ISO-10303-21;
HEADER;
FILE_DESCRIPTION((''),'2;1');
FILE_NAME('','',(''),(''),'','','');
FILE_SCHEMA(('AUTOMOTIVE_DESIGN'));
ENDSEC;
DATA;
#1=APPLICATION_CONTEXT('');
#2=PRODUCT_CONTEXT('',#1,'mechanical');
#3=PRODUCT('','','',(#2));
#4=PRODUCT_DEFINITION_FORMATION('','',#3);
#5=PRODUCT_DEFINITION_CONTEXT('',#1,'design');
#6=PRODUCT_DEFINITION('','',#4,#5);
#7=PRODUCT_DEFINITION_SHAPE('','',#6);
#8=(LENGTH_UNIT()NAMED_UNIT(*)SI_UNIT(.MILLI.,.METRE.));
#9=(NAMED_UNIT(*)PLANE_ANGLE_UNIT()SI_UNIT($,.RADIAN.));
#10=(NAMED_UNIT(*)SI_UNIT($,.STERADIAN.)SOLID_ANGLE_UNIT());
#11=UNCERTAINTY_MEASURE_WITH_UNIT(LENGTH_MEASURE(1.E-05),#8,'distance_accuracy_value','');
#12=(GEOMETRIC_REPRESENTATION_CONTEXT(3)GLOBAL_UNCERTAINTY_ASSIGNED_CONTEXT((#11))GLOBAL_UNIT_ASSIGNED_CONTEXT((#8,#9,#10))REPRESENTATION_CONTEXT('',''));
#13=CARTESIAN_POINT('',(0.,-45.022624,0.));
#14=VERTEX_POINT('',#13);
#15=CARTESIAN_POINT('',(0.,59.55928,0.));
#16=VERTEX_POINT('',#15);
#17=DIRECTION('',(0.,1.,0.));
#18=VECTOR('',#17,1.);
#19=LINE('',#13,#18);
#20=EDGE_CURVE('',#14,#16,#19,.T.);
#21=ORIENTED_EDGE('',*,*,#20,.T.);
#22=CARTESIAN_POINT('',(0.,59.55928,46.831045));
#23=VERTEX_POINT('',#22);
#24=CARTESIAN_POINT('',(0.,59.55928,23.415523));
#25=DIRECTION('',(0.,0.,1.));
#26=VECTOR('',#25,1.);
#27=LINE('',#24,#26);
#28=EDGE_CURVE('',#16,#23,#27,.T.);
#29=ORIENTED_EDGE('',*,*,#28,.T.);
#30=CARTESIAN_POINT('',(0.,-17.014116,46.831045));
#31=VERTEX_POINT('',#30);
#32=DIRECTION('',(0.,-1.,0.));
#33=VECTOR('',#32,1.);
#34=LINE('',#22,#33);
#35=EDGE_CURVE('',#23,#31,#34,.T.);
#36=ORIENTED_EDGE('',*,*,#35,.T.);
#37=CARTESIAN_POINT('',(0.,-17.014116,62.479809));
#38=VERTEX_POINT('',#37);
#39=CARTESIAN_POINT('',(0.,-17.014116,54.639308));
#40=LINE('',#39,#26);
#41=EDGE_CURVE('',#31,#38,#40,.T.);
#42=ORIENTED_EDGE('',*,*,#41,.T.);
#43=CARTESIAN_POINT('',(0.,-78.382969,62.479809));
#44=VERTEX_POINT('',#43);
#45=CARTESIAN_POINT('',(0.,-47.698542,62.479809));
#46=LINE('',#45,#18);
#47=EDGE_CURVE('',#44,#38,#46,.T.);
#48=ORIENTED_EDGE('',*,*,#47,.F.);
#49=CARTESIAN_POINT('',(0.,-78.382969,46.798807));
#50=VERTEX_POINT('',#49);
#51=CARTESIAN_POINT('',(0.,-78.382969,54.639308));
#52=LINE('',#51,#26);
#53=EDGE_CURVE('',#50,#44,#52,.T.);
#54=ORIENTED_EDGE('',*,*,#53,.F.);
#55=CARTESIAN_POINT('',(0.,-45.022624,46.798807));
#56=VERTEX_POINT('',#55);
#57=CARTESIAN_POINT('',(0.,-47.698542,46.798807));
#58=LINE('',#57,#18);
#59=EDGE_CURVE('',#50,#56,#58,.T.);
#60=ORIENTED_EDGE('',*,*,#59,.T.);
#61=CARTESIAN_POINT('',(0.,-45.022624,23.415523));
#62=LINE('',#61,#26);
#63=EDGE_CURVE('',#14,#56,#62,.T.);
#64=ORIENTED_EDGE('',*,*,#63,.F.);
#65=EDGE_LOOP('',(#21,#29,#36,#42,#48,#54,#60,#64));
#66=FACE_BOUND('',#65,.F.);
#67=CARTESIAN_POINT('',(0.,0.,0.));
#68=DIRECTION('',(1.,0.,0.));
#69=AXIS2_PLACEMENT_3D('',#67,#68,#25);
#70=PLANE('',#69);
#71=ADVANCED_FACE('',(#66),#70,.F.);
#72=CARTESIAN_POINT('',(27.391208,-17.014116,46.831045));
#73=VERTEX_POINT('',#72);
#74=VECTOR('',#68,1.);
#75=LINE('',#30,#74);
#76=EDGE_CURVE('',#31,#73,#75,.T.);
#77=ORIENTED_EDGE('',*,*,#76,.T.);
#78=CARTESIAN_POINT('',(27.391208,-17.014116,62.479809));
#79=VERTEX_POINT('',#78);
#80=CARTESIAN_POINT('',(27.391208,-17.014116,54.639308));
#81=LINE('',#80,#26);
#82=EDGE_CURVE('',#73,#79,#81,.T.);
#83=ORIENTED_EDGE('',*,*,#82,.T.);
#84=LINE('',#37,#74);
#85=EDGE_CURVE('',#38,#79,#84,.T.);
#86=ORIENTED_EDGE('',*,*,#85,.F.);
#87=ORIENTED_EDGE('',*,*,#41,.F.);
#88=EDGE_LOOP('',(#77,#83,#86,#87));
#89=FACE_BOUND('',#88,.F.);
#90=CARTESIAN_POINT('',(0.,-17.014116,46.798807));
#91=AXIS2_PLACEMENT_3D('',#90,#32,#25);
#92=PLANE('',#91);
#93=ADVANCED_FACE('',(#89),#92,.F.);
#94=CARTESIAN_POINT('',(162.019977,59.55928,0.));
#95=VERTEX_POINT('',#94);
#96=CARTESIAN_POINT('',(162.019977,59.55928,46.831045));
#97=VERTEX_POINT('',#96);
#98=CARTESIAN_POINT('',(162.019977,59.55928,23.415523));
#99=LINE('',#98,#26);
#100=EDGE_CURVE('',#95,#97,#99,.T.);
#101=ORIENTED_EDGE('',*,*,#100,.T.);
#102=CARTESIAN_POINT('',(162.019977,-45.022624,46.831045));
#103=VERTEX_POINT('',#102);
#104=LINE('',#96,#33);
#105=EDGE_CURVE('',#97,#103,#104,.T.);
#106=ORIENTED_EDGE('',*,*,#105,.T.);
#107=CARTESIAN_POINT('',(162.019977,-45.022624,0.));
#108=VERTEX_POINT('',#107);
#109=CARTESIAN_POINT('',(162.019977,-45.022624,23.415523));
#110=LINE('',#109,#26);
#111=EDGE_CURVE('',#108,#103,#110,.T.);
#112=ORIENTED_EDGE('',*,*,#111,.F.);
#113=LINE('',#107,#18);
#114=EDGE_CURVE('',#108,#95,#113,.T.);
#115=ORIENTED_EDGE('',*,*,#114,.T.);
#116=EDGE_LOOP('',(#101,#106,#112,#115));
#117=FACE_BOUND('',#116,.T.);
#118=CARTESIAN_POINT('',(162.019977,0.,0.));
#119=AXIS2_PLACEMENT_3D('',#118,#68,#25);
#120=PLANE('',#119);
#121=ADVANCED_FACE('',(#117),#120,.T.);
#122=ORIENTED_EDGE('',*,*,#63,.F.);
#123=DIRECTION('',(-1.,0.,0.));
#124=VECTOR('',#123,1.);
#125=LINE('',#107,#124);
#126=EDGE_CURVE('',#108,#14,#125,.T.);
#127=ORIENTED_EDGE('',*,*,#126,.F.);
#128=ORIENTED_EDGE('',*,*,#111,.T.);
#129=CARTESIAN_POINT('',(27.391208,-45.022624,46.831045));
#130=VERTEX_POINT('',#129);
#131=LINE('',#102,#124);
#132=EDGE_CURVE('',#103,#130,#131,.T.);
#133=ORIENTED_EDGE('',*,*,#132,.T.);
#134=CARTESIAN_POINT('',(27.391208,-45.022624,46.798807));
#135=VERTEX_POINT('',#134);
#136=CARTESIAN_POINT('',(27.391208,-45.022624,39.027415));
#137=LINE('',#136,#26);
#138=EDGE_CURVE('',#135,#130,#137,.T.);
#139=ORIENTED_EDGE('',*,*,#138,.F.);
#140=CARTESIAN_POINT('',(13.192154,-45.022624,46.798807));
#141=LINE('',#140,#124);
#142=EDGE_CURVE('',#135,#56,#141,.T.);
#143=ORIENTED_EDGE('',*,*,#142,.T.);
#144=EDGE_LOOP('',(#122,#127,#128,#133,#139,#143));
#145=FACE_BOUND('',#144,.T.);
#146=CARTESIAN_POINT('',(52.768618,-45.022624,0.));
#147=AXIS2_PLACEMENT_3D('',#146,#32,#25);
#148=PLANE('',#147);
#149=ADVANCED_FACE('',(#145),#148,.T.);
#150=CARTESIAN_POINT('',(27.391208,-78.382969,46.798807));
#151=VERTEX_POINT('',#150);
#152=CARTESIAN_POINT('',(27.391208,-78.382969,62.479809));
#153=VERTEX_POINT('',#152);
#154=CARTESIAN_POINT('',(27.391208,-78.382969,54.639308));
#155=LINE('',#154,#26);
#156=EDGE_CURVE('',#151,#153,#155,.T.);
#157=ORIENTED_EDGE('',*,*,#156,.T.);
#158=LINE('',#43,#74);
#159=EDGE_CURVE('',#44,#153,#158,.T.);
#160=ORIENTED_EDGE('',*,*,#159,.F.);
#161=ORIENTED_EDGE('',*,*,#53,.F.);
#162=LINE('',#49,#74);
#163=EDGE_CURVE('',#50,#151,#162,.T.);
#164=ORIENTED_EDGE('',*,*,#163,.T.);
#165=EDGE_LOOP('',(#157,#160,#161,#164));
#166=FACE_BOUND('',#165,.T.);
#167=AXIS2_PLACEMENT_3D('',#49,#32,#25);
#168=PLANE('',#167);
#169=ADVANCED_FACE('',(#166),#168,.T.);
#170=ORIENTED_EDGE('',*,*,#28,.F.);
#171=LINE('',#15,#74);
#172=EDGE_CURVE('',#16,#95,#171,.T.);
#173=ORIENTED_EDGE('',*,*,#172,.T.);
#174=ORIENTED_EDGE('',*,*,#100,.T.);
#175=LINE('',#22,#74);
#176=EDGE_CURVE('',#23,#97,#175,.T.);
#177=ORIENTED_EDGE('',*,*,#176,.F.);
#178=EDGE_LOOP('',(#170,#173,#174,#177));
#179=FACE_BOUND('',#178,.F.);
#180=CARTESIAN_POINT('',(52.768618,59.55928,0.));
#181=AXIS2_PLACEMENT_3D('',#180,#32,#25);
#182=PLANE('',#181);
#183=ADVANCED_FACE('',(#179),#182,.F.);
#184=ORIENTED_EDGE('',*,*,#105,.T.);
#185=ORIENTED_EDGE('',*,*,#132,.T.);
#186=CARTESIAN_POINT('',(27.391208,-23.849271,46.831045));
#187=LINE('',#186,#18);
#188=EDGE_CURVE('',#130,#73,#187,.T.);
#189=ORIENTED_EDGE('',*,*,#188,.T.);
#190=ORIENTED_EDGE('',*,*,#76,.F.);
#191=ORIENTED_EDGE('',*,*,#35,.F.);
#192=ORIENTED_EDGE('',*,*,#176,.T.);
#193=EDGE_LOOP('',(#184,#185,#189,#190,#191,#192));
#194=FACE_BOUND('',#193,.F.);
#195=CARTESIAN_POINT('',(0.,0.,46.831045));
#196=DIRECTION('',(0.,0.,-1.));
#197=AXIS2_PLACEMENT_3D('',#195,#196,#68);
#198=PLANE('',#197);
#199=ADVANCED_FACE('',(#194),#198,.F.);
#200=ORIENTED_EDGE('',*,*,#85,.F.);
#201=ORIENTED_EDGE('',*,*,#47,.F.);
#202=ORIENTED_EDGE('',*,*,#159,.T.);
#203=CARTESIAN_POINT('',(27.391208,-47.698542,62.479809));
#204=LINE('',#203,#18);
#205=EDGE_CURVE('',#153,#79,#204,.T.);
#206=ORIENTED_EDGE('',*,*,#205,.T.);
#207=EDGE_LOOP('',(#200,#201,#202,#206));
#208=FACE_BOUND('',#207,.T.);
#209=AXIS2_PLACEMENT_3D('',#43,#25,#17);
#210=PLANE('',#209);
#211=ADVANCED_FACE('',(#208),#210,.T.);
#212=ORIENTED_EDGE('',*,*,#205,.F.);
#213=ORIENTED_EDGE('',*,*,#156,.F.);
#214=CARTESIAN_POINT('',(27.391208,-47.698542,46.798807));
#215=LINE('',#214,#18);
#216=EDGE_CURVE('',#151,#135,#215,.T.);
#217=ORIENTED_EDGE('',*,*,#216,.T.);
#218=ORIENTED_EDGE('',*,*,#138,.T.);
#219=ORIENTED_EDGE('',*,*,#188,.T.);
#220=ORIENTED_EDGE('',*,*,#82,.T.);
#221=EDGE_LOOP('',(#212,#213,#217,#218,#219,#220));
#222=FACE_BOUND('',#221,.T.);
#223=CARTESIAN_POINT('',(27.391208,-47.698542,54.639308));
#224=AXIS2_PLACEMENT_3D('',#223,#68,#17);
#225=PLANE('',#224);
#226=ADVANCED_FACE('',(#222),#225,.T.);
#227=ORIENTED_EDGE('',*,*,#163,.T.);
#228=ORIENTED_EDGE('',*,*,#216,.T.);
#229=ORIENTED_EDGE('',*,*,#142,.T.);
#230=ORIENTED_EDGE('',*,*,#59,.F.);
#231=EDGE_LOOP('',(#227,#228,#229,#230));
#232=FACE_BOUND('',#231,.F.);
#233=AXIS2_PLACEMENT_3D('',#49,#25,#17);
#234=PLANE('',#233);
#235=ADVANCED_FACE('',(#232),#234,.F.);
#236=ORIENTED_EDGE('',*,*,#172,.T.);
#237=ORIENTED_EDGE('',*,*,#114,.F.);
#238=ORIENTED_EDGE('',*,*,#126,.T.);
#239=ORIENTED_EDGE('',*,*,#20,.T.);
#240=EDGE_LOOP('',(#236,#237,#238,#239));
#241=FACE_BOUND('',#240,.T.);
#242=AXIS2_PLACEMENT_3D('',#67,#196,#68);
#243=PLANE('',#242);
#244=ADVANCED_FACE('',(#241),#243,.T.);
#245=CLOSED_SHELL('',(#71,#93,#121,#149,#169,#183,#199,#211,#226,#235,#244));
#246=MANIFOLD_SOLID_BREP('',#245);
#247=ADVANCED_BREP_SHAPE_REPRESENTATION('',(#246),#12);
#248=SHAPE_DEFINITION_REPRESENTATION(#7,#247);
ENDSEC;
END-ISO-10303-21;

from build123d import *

# Parameters (mm, degrees)
F0_W     = 52.7686178684
F0_H     = 46.8310452998
F1_DEPTH = 45.0226236135
F2_W     = 61.3688528538
F2_H     = 15.6810022891
F3_DEPTH = 27.3912083358
F4_DEPTH = 109.2513594776
F5_DEPTH = 59.5592800528


# Not quite as in the source:
# - a feature names something its author has since deleted; it is built from what else it names


with BuildPart() as f1:
    # F0 (on Front) → F1 (new body)
    with BuildSketch(Plane.XZ):
        with Locations((26.3843089342, 23.4155226499)):
            Rectangle(F0_W, F0_H)
    extrude(amount=F1_DEPTH)

    # F2 (on Right) → F3 (join)
    with BuildSketch(Plane.YZ):
        with Locations((-47.6985424757, 54.6393077821)):
            Rectangle(F2_W, F2_H)
    extrude(amount=F3_DEPTH)

    # F4 (add): a face of the model
    f4_faces = [f1.faces().sort_by_distance(p)[0] for p in [
        (52.7686178684, -22.5113118067, 23.4155226499),
    ]]
    extrude(f4_faces, amount=F4_DEPTH)

    # F5 (add): a face of the model
    f5_faces = [f1.faces().sort_by_distance(p)[0] for p in [
        (81.009988673, 0, 23.4155226499),
    ]]
    extrude(f5_faces, amount=F5_DEPTH)


solid = f1.part
